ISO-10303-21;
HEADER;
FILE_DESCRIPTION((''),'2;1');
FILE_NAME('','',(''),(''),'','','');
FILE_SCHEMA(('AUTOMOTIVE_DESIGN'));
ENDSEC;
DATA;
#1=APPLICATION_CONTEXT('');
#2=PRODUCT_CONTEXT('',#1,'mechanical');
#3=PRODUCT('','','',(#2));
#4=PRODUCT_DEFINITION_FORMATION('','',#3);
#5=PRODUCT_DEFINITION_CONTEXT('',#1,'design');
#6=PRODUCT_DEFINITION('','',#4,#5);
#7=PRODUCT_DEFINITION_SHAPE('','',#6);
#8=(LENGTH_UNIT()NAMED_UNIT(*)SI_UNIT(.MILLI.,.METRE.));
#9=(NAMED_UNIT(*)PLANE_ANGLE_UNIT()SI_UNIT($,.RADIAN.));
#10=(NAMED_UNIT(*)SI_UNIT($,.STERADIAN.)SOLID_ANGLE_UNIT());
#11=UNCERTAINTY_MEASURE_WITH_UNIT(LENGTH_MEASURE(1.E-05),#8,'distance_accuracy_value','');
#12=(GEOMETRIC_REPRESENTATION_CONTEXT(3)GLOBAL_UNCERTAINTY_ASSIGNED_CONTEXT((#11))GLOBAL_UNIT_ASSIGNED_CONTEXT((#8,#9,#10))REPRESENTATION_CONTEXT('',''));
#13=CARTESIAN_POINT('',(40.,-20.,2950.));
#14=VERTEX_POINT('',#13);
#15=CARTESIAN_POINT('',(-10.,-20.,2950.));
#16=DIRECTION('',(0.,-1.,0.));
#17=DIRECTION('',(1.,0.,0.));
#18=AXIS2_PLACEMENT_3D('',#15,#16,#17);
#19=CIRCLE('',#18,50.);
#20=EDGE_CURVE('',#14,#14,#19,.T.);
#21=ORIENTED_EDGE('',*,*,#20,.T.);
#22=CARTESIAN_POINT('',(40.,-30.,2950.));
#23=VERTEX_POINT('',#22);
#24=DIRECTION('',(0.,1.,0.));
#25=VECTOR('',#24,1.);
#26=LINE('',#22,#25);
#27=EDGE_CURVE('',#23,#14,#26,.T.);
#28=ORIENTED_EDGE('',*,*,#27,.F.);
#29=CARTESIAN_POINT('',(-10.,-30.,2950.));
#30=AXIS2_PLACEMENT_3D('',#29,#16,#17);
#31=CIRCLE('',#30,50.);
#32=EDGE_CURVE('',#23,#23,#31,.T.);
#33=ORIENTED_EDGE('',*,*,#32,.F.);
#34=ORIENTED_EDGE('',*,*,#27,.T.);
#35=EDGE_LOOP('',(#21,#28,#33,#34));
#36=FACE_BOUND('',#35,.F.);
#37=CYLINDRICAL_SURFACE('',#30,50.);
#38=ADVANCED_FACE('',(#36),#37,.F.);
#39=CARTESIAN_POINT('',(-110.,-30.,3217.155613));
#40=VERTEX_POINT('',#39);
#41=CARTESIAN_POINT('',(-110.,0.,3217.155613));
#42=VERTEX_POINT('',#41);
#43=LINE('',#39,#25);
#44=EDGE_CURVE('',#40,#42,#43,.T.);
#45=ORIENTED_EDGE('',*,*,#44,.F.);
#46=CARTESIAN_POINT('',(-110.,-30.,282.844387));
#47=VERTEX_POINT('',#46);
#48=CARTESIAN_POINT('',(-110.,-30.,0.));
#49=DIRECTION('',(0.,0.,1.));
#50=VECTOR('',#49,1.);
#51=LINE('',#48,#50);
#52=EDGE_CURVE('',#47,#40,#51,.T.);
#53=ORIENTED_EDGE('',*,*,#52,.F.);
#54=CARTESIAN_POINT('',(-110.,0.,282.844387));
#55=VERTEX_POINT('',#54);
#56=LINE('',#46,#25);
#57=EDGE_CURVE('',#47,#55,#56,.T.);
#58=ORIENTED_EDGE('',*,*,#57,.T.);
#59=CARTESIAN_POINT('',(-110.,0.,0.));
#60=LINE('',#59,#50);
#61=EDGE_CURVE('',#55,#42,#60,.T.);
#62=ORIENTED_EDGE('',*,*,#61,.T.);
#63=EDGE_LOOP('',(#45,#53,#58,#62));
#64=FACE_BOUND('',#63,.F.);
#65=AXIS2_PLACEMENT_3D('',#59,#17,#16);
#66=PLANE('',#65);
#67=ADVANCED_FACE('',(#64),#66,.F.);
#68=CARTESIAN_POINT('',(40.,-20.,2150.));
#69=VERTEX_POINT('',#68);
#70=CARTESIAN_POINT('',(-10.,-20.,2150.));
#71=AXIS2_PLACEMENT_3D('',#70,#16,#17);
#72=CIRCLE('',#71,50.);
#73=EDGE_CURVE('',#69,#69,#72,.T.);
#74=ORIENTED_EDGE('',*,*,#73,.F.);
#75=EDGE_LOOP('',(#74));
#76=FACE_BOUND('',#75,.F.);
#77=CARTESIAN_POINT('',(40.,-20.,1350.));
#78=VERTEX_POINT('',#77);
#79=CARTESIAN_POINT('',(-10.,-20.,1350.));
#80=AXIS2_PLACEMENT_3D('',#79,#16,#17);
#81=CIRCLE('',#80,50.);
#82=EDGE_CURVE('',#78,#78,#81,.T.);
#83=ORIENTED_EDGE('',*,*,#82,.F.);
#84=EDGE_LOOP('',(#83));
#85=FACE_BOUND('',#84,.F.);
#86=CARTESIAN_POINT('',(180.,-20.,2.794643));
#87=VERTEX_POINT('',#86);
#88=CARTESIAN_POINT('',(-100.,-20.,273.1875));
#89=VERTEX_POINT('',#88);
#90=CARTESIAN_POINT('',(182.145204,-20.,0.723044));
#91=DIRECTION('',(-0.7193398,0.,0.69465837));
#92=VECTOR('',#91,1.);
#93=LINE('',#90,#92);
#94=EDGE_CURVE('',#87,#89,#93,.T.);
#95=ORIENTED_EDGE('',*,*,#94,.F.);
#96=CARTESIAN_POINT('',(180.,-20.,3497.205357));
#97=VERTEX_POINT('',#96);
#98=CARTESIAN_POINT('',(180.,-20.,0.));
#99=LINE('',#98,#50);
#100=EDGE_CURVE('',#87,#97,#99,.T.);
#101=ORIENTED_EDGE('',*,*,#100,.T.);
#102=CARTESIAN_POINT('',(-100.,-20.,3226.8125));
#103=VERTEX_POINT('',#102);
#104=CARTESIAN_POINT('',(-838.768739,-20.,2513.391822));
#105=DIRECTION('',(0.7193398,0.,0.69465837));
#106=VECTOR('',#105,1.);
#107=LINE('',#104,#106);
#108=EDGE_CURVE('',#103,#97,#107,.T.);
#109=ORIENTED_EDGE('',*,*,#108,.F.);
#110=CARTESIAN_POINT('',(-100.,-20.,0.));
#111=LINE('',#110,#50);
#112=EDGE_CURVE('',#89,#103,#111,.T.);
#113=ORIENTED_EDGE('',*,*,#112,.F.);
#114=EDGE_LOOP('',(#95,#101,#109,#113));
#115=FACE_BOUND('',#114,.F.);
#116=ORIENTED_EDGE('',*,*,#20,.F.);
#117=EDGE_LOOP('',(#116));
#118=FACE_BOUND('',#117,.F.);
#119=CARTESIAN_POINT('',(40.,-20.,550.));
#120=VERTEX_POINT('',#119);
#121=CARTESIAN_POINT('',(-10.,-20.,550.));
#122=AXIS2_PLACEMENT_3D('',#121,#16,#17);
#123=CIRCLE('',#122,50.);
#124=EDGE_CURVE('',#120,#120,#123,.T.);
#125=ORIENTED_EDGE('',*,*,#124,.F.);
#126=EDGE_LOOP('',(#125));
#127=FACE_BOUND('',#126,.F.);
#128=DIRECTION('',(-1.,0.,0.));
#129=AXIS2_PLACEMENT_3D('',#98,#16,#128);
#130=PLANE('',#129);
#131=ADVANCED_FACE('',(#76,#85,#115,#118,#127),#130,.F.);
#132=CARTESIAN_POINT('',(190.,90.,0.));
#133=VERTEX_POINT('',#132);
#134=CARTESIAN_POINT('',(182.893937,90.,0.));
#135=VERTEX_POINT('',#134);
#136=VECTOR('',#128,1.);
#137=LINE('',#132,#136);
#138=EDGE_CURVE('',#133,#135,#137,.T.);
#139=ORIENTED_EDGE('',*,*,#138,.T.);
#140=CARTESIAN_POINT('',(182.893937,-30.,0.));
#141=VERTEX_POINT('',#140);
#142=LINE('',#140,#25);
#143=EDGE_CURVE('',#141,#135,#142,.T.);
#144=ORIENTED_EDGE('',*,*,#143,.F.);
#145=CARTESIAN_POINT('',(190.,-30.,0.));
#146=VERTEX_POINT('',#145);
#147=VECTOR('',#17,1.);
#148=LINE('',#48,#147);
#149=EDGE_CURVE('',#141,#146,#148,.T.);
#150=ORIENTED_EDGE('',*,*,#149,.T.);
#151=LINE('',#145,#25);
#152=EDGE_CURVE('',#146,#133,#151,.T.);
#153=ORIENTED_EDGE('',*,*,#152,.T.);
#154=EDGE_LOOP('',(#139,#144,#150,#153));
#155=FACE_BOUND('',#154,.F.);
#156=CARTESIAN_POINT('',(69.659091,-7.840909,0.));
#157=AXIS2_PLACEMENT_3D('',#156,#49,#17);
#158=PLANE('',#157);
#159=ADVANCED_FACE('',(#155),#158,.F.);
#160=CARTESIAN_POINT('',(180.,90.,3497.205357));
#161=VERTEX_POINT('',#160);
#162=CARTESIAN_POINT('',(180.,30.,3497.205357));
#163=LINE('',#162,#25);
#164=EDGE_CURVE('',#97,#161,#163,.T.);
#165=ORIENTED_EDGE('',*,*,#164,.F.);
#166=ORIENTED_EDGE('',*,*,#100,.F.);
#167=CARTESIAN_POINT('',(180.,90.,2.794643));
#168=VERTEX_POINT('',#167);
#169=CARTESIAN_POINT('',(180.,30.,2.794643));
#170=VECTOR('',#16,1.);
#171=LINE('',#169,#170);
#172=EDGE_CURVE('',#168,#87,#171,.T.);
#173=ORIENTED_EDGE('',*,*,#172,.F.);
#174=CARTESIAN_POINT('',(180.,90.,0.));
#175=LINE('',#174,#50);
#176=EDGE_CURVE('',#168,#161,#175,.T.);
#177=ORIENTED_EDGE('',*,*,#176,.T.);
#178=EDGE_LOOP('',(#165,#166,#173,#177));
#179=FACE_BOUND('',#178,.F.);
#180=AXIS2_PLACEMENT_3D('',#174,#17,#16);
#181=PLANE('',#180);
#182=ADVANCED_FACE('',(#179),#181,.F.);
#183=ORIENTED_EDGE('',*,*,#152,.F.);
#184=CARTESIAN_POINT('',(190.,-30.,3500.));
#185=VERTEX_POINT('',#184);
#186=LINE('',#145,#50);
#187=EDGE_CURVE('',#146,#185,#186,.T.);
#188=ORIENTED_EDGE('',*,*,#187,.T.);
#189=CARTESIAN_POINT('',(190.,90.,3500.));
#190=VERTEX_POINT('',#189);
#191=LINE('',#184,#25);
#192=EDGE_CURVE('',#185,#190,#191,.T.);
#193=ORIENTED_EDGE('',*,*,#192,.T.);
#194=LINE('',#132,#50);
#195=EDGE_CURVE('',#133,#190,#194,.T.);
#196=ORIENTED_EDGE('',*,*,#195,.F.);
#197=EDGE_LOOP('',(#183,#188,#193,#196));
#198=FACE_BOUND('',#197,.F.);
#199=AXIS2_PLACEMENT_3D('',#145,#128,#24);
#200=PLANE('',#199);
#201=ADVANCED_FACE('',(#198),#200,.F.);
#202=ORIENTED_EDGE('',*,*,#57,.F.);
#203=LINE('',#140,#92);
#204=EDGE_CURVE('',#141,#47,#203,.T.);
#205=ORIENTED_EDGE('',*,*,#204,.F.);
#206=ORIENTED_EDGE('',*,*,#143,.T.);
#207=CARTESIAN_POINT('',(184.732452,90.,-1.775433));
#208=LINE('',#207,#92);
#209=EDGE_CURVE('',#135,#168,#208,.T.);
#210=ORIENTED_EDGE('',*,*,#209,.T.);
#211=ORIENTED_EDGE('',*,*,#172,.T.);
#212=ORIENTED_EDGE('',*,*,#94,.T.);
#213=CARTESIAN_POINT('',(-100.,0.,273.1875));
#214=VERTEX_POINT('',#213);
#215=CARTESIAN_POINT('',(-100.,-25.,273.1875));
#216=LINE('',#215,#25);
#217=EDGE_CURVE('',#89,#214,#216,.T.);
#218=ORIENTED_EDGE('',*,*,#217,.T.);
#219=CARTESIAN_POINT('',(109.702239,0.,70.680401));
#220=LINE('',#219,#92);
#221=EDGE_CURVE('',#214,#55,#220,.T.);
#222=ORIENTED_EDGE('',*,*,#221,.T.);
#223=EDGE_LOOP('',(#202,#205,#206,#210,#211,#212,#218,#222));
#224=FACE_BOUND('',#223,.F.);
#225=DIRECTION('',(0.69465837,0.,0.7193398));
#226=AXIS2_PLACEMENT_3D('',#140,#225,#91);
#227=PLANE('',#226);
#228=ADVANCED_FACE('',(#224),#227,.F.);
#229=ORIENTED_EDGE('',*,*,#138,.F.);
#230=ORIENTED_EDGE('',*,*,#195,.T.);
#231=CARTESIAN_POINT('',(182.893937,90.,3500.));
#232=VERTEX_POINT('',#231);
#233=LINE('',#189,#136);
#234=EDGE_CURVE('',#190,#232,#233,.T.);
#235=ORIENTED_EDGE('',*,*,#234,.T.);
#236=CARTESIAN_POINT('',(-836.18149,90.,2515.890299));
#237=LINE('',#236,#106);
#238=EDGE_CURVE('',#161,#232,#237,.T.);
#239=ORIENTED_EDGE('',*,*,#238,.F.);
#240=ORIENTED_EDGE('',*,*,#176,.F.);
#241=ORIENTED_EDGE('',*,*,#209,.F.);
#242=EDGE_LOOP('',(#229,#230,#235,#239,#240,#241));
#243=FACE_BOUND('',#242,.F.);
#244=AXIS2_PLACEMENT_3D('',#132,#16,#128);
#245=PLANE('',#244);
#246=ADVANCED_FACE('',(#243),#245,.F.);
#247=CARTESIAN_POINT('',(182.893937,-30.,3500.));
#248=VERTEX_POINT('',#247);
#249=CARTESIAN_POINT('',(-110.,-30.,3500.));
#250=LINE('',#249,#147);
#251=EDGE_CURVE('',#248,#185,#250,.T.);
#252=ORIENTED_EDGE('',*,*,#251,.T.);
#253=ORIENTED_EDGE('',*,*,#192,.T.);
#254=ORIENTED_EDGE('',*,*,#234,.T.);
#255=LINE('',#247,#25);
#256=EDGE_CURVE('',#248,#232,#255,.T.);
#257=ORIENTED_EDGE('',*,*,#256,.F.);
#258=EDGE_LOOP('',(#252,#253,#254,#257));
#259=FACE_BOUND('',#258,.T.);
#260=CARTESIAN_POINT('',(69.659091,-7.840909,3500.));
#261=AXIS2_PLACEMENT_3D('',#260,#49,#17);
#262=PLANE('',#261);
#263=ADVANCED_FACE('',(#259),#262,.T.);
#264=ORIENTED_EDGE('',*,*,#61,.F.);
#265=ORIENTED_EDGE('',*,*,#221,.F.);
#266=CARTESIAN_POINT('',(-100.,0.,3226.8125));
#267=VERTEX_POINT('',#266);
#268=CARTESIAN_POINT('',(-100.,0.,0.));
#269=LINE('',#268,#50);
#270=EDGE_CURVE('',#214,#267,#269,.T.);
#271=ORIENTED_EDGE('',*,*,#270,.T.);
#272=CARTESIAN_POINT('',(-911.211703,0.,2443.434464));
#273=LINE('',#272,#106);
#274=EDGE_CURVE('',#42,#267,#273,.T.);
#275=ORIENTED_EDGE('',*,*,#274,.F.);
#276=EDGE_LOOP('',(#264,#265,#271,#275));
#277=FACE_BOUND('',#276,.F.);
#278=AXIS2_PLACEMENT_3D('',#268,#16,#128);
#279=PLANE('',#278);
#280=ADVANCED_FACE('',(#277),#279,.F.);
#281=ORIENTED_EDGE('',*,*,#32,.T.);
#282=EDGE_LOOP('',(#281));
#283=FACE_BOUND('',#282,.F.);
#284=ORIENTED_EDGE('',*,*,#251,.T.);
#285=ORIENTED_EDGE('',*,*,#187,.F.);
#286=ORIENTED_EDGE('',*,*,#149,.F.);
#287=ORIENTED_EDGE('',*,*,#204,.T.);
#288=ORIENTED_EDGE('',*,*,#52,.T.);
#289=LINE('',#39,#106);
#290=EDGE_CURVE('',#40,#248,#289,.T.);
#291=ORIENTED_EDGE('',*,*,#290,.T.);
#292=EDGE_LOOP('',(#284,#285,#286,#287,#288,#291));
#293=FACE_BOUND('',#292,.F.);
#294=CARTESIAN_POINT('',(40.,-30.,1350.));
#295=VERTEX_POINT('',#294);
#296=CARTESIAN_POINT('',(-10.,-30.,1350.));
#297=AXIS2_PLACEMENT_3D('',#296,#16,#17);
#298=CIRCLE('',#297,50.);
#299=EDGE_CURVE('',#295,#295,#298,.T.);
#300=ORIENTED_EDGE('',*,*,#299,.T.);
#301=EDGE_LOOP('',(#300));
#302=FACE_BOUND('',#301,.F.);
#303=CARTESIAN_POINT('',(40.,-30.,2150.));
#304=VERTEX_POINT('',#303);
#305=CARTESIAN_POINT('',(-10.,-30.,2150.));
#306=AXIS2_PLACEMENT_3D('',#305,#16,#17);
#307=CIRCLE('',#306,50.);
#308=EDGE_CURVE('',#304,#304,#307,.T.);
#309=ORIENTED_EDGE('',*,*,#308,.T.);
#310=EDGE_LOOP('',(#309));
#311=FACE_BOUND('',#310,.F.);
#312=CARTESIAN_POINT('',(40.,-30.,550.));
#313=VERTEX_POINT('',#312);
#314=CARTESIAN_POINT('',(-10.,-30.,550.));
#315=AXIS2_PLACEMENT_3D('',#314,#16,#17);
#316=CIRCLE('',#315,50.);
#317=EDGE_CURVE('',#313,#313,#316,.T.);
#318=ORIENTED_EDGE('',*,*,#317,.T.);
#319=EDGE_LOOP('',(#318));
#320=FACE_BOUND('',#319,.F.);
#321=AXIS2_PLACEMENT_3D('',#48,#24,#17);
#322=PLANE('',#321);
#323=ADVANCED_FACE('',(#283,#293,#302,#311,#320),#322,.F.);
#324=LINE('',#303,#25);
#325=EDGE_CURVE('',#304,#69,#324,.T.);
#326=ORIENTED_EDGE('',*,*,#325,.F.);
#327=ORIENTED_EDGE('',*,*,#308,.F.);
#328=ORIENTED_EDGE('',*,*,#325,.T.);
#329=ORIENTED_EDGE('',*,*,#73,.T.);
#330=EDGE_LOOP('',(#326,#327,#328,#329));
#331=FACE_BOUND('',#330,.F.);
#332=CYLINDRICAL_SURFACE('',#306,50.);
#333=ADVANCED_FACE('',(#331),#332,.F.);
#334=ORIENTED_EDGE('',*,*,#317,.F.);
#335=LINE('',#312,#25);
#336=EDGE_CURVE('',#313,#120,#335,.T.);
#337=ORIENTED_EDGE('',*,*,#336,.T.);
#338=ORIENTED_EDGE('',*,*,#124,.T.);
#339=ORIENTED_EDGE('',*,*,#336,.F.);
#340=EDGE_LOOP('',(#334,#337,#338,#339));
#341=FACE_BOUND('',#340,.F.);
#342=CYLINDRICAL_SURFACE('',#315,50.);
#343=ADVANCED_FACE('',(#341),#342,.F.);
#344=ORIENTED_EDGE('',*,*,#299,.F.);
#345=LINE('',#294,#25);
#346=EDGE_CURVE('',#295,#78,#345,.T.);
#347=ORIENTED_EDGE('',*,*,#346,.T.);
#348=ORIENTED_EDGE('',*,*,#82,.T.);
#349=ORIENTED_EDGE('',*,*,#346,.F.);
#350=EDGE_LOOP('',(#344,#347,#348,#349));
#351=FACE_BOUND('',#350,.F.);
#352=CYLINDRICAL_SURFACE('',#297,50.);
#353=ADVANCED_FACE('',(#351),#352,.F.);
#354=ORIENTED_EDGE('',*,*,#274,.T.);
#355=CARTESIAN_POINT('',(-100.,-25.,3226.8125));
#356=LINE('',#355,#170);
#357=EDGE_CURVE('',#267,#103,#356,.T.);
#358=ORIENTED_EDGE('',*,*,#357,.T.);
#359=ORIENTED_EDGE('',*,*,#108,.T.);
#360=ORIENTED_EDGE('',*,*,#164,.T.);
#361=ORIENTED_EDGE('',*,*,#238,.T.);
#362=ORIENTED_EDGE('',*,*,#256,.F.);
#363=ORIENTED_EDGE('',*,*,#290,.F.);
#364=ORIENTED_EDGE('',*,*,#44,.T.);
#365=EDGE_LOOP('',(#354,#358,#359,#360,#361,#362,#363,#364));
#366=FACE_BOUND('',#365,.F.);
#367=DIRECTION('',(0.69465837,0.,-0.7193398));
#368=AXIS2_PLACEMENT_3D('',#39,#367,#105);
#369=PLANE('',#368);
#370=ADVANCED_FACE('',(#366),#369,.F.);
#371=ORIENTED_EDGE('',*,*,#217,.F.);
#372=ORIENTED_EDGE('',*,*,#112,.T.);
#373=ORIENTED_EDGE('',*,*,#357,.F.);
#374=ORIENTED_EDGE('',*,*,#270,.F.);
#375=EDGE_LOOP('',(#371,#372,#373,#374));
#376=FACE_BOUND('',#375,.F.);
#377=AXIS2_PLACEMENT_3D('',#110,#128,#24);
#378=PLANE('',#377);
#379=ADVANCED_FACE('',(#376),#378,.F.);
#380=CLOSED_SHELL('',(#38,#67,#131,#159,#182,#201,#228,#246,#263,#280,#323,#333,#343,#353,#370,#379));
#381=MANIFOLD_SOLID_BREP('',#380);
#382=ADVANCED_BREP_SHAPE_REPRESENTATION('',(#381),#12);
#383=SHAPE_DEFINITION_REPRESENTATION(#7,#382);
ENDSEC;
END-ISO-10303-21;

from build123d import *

# Parameters (mm, degrees)
F1_DEPTH = 3500
F3_DEPTH = 200
F4_R     = 50
F5_DEPTH = 120.001


# Not quite as in the source:
# - a feature names something its author has since deleted; it is built from what else it names


with BuildPart() as f1:
    # F0 (on Top) → F1 (new body)
    with BuildSketch(Plane.XY):
        Polygon((-100, 0), (-110, 0), (-110, -30), (190, -30), (190, 90), (180, 90), (180, -20), (-100, -20), align=None)
    extrude(amount=F1_DEPTH)

    # F2 (on face) → F3 (cut)
    with BuildSketch(Plane.XZ.offset(30)):
        Polygon((182.8939372419, 0), (-110, 282.8443874035), (-110, 0), align=None)
        Polygon((-110, 3500), (-110, 3217.1556125965), (182.8939372419, 3500), align=None)
    extrude(amount=-F3_DEPTH, mode=Mode.SUBTRACT)

    # F4 (on face) → F5 (cut, through all)
    with BuildSketch(Plane.XZ.offset(30)):
        with Locations((-10, 2950)):
            Circle(F4_R)
        with Locations((-10, 2150)):
            Circle(F4_R)
        with Locations((-10, 1350)):
            Circle(F4_R)
        with Locations((-10, 550)):
            Circle(F4_R)
    extrude(amount=-F5_DEPTH, mode=Mode.SUBTRACT)


solid = f1.part
